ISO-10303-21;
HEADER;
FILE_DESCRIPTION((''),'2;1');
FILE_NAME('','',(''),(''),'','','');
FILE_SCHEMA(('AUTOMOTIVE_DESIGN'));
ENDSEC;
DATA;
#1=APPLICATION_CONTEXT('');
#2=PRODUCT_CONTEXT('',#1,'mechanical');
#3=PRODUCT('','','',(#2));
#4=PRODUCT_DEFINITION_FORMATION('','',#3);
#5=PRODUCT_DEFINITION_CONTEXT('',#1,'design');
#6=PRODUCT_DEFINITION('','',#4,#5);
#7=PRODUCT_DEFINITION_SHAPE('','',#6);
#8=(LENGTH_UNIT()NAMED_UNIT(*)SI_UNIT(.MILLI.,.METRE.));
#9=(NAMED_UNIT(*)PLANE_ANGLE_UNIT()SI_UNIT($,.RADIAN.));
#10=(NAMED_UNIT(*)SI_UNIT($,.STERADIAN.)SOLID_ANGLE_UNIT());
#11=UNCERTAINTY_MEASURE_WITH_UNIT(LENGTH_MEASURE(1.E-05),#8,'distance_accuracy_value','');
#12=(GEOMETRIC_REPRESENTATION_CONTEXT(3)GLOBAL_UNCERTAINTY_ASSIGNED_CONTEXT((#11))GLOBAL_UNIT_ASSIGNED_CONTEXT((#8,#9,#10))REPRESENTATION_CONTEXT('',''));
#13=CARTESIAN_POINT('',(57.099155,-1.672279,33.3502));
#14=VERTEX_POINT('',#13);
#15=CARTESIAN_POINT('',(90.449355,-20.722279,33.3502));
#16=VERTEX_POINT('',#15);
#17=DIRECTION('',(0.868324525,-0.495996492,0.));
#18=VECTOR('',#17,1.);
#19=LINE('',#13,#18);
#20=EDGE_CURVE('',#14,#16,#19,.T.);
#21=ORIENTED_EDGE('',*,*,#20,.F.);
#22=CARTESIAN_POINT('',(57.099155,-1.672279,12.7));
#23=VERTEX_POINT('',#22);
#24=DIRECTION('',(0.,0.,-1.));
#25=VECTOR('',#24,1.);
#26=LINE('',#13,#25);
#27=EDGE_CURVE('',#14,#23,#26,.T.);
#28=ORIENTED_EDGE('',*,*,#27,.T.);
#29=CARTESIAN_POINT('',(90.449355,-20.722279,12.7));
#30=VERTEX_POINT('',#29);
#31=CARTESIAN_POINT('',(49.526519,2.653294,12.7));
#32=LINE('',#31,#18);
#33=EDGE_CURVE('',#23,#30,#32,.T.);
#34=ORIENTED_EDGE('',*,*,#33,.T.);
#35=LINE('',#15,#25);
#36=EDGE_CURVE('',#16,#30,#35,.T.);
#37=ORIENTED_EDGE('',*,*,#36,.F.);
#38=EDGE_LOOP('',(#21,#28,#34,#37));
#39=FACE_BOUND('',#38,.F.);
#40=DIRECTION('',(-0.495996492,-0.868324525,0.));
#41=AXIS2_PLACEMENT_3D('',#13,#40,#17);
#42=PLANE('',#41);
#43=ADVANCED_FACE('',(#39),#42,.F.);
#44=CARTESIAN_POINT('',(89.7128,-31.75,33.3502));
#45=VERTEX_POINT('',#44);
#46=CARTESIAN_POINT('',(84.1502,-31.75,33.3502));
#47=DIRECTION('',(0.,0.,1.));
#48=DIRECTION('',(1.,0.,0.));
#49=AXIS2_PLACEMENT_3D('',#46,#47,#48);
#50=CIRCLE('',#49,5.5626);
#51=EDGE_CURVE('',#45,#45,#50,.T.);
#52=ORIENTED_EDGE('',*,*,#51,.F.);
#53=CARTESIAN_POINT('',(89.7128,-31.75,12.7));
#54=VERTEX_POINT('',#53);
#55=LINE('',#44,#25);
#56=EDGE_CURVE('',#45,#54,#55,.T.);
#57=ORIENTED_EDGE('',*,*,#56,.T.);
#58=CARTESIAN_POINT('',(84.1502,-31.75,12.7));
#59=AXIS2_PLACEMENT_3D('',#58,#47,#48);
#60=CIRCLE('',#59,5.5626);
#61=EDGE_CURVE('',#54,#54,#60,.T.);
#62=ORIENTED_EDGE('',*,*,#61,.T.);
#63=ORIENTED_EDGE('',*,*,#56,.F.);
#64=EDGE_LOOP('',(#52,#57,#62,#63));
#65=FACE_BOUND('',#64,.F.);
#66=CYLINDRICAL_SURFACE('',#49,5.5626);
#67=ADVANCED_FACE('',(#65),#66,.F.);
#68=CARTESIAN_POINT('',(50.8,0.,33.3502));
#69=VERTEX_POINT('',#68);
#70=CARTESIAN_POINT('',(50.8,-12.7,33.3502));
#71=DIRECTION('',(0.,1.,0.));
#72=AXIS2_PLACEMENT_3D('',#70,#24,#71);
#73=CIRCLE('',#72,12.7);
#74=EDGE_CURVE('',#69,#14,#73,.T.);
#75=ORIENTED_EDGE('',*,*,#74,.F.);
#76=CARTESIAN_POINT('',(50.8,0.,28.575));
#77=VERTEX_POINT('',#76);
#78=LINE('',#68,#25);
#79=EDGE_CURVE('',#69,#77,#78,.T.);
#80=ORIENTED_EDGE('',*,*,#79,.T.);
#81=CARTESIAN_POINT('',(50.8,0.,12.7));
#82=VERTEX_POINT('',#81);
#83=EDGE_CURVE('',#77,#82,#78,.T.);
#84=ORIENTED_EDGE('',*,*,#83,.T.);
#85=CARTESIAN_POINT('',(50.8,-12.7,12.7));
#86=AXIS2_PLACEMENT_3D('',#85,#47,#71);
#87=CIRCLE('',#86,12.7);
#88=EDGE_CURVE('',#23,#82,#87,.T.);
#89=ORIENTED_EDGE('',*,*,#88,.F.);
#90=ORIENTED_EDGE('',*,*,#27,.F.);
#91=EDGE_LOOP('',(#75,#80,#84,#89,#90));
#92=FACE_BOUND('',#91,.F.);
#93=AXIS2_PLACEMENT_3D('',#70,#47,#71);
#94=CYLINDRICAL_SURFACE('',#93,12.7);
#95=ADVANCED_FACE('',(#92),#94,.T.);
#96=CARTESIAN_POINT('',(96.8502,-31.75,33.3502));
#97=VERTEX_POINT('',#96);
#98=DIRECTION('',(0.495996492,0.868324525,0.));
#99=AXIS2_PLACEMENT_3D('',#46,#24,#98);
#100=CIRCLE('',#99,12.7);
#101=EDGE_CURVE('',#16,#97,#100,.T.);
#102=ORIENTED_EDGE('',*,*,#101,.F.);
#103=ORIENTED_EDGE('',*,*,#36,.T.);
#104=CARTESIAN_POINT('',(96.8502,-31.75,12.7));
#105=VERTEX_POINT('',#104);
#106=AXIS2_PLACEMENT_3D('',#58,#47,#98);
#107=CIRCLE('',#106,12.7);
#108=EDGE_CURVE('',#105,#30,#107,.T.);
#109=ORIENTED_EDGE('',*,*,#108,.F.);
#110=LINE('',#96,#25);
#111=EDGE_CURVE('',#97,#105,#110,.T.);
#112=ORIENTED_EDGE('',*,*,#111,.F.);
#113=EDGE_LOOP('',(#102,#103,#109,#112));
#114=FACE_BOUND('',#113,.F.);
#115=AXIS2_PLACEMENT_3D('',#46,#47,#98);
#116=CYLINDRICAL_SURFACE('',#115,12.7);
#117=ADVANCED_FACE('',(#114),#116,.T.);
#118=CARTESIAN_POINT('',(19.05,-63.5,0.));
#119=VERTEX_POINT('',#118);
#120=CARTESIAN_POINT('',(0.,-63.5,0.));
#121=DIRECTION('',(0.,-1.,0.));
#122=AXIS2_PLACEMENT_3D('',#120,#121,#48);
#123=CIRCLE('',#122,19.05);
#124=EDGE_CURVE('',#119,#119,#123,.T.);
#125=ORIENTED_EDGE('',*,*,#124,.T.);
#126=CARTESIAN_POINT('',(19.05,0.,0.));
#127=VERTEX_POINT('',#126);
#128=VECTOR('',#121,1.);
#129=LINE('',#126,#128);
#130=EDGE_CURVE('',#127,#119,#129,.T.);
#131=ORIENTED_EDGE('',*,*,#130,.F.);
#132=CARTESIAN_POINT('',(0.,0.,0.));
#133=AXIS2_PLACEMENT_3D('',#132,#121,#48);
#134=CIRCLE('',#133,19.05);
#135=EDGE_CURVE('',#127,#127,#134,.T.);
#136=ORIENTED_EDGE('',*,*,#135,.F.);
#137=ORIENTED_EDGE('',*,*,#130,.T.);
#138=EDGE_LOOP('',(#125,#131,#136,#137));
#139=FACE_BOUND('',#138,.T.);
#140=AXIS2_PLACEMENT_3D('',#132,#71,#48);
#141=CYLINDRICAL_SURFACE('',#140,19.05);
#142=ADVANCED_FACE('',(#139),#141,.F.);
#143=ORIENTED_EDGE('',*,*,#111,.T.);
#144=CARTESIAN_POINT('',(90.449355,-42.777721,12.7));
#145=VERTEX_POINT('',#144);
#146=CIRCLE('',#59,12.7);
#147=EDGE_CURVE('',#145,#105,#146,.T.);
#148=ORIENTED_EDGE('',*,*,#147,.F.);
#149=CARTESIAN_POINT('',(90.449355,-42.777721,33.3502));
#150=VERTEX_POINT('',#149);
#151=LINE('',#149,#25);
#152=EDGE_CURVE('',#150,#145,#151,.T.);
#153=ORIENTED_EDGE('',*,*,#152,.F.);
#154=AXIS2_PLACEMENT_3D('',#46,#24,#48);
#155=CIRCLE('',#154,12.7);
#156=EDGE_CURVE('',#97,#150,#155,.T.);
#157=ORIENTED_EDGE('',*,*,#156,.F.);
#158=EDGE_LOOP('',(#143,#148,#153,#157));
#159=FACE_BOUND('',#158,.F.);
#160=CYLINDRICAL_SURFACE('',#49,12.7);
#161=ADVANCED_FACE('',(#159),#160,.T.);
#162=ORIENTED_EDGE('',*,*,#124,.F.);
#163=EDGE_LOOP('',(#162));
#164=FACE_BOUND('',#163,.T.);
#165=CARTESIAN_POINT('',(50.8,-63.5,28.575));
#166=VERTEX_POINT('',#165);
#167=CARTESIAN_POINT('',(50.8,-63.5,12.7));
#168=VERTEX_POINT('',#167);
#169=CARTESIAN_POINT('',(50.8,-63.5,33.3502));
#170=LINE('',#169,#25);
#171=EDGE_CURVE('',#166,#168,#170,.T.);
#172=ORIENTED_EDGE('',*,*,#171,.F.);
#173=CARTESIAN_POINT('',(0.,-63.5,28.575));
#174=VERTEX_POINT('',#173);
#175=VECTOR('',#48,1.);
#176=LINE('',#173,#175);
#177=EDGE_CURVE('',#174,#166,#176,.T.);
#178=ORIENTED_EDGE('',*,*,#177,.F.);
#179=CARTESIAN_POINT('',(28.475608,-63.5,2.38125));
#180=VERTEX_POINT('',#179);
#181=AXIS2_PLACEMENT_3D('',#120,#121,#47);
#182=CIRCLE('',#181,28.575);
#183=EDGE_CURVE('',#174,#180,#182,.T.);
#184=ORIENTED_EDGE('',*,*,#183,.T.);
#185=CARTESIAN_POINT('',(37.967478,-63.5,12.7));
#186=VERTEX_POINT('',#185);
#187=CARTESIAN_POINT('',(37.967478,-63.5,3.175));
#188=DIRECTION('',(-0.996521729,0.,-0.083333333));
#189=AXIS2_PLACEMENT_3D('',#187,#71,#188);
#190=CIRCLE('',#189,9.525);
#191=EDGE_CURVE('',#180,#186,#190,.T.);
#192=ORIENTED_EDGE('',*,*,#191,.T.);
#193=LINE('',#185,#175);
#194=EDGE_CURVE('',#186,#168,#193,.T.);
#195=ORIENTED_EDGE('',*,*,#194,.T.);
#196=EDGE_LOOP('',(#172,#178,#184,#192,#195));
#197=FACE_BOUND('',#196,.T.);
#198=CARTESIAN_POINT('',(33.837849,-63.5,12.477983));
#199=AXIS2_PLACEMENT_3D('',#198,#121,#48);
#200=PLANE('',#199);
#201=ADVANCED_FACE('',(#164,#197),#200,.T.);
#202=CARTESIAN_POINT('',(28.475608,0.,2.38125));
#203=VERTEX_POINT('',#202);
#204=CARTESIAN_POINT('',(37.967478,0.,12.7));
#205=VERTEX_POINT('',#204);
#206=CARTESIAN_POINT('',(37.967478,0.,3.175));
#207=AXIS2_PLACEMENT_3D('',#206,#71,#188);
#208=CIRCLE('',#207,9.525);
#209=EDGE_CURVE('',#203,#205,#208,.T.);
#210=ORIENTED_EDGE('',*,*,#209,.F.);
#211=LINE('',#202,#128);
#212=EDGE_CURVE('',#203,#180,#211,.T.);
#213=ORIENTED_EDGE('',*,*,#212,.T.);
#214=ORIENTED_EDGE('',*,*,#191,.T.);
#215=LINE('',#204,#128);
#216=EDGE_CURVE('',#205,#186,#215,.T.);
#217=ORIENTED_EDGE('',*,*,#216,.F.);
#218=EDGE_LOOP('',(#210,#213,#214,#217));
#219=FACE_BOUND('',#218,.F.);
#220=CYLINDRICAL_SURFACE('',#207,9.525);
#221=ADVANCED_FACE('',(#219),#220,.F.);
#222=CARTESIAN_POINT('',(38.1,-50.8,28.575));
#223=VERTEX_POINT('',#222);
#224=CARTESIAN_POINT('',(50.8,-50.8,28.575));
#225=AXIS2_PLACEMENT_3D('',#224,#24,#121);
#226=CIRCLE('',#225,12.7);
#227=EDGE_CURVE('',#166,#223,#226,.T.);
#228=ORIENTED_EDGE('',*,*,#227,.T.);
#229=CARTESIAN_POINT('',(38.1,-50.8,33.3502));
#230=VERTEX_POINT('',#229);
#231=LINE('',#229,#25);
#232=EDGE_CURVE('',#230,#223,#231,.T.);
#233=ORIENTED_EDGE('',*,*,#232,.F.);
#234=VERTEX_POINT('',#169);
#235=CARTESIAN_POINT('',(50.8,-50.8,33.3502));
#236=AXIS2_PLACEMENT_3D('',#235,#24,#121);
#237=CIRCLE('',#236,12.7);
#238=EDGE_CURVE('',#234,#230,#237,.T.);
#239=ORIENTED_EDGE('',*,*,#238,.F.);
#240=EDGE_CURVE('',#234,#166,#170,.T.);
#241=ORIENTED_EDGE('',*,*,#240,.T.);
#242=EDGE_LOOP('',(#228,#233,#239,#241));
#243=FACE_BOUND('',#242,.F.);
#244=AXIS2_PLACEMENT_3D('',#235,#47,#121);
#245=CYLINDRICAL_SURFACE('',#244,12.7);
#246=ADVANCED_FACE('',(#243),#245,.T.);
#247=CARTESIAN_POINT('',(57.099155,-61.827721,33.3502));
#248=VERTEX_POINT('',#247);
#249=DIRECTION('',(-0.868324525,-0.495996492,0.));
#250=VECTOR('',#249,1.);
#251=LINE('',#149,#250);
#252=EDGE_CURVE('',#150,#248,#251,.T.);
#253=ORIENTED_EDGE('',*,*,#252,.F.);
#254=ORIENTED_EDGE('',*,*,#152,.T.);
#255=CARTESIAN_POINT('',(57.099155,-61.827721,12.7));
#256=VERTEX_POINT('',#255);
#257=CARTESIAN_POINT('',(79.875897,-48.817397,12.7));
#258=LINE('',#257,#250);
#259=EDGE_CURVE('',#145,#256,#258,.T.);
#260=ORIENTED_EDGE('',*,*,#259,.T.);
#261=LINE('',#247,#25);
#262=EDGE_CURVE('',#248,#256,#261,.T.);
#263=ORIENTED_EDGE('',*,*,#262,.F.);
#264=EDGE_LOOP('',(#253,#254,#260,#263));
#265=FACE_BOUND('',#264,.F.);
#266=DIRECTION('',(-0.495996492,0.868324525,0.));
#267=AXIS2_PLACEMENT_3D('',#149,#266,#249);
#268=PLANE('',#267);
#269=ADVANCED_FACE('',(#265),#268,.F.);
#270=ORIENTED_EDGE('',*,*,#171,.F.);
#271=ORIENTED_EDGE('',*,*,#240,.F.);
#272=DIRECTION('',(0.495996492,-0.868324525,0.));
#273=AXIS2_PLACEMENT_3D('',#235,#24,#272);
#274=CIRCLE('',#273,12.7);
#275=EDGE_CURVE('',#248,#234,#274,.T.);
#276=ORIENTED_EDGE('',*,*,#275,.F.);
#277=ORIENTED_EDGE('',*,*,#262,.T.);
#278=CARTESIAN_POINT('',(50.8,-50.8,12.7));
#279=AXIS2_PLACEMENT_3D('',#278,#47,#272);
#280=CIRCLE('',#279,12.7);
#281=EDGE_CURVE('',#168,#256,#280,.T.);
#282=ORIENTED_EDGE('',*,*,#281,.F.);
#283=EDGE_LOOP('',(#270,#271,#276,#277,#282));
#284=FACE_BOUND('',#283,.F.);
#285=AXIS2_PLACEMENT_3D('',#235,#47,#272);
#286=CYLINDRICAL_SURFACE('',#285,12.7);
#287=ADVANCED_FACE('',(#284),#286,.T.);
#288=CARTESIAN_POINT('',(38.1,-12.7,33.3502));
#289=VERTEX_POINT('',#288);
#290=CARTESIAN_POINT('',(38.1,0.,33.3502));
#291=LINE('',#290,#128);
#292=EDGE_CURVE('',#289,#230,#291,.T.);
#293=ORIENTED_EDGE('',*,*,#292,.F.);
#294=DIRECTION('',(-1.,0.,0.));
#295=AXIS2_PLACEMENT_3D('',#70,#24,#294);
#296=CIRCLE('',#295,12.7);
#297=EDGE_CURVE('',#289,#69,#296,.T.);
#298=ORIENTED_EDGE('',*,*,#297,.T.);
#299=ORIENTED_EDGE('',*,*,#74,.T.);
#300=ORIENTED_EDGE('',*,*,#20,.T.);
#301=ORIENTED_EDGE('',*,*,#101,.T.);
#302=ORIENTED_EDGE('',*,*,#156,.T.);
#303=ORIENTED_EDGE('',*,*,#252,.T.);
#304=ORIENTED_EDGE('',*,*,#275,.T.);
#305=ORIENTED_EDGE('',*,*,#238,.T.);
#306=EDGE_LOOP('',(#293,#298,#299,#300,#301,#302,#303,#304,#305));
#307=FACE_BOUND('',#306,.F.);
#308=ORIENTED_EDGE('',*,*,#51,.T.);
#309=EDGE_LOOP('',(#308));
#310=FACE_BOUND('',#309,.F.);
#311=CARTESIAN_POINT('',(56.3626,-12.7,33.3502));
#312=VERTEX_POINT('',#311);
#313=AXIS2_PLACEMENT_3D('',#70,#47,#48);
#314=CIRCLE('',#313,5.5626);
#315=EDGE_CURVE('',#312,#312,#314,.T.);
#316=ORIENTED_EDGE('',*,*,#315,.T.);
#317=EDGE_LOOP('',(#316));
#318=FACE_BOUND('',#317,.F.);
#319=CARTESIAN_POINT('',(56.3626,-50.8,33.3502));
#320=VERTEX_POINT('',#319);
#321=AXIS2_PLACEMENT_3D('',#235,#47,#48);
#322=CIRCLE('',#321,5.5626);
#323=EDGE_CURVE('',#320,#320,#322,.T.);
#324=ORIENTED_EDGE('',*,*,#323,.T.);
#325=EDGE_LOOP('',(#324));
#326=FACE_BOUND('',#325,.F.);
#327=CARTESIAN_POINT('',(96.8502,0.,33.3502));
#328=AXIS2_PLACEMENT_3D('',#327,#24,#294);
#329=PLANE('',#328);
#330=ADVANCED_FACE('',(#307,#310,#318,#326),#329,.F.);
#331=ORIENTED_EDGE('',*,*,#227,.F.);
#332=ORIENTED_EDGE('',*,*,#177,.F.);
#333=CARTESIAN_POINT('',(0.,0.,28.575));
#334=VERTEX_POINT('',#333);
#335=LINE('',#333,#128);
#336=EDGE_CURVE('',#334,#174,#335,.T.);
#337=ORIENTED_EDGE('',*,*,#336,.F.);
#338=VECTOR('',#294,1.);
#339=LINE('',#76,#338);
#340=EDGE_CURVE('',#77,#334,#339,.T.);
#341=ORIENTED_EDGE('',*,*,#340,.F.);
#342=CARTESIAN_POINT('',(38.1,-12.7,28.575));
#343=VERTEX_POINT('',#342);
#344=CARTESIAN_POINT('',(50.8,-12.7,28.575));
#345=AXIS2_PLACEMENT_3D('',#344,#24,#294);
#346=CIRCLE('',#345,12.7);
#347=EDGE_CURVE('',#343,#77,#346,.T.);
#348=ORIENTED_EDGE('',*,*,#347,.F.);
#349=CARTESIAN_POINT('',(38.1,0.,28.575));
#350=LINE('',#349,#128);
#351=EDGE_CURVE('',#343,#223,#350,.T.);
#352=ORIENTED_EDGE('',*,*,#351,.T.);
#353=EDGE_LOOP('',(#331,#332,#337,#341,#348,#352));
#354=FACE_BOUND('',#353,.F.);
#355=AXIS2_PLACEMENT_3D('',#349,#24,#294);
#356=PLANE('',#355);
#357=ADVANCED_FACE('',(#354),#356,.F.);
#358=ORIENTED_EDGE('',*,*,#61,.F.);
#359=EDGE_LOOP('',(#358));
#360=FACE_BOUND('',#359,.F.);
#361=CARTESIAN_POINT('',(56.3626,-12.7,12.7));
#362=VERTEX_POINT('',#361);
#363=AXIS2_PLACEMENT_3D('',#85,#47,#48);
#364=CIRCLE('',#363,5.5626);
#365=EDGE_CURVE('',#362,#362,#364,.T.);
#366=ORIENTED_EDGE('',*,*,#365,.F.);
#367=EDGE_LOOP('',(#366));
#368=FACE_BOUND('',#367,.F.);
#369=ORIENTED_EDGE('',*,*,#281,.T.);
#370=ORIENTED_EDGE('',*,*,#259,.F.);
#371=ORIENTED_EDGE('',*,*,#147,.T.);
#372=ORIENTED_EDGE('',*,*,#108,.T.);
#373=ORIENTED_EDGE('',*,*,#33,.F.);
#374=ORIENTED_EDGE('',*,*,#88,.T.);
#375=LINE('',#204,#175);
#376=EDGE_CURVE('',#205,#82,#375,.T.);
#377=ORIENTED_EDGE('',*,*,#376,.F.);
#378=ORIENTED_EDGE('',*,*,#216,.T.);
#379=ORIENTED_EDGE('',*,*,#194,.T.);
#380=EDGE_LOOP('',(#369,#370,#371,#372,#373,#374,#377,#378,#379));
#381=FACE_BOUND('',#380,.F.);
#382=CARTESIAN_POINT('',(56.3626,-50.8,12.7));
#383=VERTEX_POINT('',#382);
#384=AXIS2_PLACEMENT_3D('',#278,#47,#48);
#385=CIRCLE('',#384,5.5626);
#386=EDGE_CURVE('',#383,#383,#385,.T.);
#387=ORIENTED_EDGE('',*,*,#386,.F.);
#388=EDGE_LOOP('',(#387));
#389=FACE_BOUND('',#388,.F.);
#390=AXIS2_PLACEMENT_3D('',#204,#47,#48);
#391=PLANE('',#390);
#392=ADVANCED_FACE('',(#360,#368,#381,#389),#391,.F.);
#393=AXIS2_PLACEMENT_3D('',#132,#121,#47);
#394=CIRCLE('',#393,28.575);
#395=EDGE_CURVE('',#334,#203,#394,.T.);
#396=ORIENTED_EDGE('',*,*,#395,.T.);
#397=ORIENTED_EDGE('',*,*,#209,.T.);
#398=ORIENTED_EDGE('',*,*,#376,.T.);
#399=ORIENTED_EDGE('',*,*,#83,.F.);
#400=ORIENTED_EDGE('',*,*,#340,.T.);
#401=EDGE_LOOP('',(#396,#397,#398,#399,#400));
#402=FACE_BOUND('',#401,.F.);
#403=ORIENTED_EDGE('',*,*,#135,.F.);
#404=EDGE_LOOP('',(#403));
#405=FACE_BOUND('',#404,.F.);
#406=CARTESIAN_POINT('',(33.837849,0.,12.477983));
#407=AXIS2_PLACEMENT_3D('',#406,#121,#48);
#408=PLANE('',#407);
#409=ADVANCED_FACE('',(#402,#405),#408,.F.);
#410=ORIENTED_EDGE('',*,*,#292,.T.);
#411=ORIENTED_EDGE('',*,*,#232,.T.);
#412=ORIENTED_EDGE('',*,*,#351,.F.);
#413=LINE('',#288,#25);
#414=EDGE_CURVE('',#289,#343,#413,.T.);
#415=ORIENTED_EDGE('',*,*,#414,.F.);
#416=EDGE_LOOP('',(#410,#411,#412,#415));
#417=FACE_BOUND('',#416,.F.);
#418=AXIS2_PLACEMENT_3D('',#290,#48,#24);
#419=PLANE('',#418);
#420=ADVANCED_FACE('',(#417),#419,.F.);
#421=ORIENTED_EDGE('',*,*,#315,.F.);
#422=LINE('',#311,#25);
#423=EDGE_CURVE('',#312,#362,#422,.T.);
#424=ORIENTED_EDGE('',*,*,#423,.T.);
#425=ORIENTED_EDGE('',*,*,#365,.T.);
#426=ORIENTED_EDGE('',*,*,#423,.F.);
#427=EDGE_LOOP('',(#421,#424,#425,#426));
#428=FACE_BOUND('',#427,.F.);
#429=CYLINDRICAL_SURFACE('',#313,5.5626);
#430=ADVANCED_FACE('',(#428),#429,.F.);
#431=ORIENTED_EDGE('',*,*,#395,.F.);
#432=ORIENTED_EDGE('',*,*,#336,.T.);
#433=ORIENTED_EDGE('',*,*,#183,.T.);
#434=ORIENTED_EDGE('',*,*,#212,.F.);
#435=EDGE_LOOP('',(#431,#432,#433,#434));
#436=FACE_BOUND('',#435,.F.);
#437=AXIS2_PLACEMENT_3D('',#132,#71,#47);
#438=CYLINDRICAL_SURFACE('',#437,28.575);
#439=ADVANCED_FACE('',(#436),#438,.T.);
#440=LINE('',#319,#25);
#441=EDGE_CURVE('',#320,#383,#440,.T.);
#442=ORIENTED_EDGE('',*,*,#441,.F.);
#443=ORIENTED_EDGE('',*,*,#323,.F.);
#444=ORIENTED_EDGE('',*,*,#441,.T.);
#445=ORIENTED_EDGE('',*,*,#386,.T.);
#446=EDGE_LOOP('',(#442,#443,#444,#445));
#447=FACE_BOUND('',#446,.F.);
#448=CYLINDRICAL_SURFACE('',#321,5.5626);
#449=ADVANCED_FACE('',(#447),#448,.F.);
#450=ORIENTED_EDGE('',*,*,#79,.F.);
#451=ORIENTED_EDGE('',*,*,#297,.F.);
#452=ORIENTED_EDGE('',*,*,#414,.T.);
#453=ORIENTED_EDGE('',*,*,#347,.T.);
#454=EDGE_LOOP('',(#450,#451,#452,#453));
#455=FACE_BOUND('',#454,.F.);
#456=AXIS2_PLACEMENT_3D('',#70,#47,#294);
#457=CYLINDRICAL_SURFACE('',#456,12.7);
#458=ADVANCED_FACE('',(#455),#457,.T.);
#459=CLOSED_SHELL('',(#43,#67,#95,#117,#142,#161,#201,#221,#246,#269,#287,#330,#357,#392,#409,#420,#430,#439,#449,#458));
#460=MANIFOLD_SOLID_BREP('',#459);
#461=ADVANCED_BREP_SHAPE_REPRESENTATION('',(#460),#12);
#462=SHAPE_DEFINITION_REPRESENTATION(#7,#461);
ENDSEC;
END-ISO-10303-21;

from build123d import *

# Parameters (mm, degrees)
F0_R     = 19.05
F1_DEPTH = 63.5
F2_R     = 5.5626
F3_DEPTH = 61.9262
F4_DEPTH = 4.7752
F5_DEPTH = 61.9262


with BuildPart() as f1:
    # F0 (on Front) → F1 (new body)
    with BuildSketch(Plane.XZ):
        with BuildLine():
            Line((38.1, 28.575), (0, 28.575))
            ThreePointArc((0, 28.575), (-19.345366451, -21.0306305629), (28.4756083945, 2.38125))
            ThreePointArc((28.4756083945, 2.38125), (30.9572676717, 9.6234554837), (37.9674778593, 12.7))
            Line((37.9674778593, 12.7), (96.8502, 12.7))
            Line((96.8502, 12.7), (96.8502, 33.3502))
            Line((96.8502, 33.3502), (38.1, 33.3502))
            Line((38.1, 33.3502), (38.1, 28.575))
        make_face()
        Circle(F0_R, mode=Mode.SUBTRACT)
    extrude(amount=F1_DEPTH)

    # F2 (on face) → F3 (cut, through all)
    with BuildSketch(Plane.XY.offset(33.3502)):
        with Locations((50.8, -50.8)):
            Circle(F2_R)
        with Locations((50.8, -12.7)):
            Circle(F2_R)
        with Locations((84.1502, -31.75)):
            Circle(F2_R)
    extrude(amount=-F3_DEPTH, mode=Mode.SUBTRACT)

    # F2 (on face) → F4 (cut)
    with BuildSketch(Plane.XY.offset(33.3502)):
        with BuildLine():
            ThreePointArc((38.1, -12.7), (41.8197438789, -3.7197438789), (50.8, 0))
            Line((50.8, 0), (38.1, 0))
            Line((38.1, 0), (38.1, -12.7))
        make_face()
        with BuildLine():
            Line((38.1, -63.5), (50.8, -63.5))
            ThreePointArc((50.8, -63.5), (41.8197438789, -59.7802561211), (38.1, -50.8))
            Line((38.1, -50.8), (38.1, -63.5))
        make_face()
    extrude(amount=-F4_DEPTH, mode=Mode.SUBTRACT)

    # F2 (on face) → F5 (cut, through all)
    with BuildSketch(Plane.XY.offset(33.3502)):
        with BuildLine():
            ThreePointArc((96.8502, -31.75), (95.1340352623, -38.1253715915), (90.4493554441, -42.7777214642))
            Line((90.4493554441, -42.7777214642), (57.0991554441, -61.8277214642))
            ThreePointArc((57.0991554441, -61.8277214642), (54.0586759125, -63.0748128824), (50.8, -63.5))
            Line((50.8, -63.5), (96.8502, -63.5))
            Line((96.8502, -63.5), (96.8502, -31.75))
        make_face()
        with BuildLine():
            ThreePointArc((90.4493554441, -20.7222785358), (95.1340352623, -25.3746284085), (96.8502, -31.75))
            Line((96.8502, -31.75), (96.8502, 0))
            Line((96.8502, 0), (50.8, 0))
            ThreePointArc((50.8, 0), (54.0586759125, -0.4251871176), (57.0991554441, -1.6722785358))
            Line((57.0991554441, -1.6722785358), (90.4493554441, -20.7222785358))
        make_face()
    extrude(amount=-F5_DEPTH, mode=Mode.SUBTRACT)


solid = f1.part
